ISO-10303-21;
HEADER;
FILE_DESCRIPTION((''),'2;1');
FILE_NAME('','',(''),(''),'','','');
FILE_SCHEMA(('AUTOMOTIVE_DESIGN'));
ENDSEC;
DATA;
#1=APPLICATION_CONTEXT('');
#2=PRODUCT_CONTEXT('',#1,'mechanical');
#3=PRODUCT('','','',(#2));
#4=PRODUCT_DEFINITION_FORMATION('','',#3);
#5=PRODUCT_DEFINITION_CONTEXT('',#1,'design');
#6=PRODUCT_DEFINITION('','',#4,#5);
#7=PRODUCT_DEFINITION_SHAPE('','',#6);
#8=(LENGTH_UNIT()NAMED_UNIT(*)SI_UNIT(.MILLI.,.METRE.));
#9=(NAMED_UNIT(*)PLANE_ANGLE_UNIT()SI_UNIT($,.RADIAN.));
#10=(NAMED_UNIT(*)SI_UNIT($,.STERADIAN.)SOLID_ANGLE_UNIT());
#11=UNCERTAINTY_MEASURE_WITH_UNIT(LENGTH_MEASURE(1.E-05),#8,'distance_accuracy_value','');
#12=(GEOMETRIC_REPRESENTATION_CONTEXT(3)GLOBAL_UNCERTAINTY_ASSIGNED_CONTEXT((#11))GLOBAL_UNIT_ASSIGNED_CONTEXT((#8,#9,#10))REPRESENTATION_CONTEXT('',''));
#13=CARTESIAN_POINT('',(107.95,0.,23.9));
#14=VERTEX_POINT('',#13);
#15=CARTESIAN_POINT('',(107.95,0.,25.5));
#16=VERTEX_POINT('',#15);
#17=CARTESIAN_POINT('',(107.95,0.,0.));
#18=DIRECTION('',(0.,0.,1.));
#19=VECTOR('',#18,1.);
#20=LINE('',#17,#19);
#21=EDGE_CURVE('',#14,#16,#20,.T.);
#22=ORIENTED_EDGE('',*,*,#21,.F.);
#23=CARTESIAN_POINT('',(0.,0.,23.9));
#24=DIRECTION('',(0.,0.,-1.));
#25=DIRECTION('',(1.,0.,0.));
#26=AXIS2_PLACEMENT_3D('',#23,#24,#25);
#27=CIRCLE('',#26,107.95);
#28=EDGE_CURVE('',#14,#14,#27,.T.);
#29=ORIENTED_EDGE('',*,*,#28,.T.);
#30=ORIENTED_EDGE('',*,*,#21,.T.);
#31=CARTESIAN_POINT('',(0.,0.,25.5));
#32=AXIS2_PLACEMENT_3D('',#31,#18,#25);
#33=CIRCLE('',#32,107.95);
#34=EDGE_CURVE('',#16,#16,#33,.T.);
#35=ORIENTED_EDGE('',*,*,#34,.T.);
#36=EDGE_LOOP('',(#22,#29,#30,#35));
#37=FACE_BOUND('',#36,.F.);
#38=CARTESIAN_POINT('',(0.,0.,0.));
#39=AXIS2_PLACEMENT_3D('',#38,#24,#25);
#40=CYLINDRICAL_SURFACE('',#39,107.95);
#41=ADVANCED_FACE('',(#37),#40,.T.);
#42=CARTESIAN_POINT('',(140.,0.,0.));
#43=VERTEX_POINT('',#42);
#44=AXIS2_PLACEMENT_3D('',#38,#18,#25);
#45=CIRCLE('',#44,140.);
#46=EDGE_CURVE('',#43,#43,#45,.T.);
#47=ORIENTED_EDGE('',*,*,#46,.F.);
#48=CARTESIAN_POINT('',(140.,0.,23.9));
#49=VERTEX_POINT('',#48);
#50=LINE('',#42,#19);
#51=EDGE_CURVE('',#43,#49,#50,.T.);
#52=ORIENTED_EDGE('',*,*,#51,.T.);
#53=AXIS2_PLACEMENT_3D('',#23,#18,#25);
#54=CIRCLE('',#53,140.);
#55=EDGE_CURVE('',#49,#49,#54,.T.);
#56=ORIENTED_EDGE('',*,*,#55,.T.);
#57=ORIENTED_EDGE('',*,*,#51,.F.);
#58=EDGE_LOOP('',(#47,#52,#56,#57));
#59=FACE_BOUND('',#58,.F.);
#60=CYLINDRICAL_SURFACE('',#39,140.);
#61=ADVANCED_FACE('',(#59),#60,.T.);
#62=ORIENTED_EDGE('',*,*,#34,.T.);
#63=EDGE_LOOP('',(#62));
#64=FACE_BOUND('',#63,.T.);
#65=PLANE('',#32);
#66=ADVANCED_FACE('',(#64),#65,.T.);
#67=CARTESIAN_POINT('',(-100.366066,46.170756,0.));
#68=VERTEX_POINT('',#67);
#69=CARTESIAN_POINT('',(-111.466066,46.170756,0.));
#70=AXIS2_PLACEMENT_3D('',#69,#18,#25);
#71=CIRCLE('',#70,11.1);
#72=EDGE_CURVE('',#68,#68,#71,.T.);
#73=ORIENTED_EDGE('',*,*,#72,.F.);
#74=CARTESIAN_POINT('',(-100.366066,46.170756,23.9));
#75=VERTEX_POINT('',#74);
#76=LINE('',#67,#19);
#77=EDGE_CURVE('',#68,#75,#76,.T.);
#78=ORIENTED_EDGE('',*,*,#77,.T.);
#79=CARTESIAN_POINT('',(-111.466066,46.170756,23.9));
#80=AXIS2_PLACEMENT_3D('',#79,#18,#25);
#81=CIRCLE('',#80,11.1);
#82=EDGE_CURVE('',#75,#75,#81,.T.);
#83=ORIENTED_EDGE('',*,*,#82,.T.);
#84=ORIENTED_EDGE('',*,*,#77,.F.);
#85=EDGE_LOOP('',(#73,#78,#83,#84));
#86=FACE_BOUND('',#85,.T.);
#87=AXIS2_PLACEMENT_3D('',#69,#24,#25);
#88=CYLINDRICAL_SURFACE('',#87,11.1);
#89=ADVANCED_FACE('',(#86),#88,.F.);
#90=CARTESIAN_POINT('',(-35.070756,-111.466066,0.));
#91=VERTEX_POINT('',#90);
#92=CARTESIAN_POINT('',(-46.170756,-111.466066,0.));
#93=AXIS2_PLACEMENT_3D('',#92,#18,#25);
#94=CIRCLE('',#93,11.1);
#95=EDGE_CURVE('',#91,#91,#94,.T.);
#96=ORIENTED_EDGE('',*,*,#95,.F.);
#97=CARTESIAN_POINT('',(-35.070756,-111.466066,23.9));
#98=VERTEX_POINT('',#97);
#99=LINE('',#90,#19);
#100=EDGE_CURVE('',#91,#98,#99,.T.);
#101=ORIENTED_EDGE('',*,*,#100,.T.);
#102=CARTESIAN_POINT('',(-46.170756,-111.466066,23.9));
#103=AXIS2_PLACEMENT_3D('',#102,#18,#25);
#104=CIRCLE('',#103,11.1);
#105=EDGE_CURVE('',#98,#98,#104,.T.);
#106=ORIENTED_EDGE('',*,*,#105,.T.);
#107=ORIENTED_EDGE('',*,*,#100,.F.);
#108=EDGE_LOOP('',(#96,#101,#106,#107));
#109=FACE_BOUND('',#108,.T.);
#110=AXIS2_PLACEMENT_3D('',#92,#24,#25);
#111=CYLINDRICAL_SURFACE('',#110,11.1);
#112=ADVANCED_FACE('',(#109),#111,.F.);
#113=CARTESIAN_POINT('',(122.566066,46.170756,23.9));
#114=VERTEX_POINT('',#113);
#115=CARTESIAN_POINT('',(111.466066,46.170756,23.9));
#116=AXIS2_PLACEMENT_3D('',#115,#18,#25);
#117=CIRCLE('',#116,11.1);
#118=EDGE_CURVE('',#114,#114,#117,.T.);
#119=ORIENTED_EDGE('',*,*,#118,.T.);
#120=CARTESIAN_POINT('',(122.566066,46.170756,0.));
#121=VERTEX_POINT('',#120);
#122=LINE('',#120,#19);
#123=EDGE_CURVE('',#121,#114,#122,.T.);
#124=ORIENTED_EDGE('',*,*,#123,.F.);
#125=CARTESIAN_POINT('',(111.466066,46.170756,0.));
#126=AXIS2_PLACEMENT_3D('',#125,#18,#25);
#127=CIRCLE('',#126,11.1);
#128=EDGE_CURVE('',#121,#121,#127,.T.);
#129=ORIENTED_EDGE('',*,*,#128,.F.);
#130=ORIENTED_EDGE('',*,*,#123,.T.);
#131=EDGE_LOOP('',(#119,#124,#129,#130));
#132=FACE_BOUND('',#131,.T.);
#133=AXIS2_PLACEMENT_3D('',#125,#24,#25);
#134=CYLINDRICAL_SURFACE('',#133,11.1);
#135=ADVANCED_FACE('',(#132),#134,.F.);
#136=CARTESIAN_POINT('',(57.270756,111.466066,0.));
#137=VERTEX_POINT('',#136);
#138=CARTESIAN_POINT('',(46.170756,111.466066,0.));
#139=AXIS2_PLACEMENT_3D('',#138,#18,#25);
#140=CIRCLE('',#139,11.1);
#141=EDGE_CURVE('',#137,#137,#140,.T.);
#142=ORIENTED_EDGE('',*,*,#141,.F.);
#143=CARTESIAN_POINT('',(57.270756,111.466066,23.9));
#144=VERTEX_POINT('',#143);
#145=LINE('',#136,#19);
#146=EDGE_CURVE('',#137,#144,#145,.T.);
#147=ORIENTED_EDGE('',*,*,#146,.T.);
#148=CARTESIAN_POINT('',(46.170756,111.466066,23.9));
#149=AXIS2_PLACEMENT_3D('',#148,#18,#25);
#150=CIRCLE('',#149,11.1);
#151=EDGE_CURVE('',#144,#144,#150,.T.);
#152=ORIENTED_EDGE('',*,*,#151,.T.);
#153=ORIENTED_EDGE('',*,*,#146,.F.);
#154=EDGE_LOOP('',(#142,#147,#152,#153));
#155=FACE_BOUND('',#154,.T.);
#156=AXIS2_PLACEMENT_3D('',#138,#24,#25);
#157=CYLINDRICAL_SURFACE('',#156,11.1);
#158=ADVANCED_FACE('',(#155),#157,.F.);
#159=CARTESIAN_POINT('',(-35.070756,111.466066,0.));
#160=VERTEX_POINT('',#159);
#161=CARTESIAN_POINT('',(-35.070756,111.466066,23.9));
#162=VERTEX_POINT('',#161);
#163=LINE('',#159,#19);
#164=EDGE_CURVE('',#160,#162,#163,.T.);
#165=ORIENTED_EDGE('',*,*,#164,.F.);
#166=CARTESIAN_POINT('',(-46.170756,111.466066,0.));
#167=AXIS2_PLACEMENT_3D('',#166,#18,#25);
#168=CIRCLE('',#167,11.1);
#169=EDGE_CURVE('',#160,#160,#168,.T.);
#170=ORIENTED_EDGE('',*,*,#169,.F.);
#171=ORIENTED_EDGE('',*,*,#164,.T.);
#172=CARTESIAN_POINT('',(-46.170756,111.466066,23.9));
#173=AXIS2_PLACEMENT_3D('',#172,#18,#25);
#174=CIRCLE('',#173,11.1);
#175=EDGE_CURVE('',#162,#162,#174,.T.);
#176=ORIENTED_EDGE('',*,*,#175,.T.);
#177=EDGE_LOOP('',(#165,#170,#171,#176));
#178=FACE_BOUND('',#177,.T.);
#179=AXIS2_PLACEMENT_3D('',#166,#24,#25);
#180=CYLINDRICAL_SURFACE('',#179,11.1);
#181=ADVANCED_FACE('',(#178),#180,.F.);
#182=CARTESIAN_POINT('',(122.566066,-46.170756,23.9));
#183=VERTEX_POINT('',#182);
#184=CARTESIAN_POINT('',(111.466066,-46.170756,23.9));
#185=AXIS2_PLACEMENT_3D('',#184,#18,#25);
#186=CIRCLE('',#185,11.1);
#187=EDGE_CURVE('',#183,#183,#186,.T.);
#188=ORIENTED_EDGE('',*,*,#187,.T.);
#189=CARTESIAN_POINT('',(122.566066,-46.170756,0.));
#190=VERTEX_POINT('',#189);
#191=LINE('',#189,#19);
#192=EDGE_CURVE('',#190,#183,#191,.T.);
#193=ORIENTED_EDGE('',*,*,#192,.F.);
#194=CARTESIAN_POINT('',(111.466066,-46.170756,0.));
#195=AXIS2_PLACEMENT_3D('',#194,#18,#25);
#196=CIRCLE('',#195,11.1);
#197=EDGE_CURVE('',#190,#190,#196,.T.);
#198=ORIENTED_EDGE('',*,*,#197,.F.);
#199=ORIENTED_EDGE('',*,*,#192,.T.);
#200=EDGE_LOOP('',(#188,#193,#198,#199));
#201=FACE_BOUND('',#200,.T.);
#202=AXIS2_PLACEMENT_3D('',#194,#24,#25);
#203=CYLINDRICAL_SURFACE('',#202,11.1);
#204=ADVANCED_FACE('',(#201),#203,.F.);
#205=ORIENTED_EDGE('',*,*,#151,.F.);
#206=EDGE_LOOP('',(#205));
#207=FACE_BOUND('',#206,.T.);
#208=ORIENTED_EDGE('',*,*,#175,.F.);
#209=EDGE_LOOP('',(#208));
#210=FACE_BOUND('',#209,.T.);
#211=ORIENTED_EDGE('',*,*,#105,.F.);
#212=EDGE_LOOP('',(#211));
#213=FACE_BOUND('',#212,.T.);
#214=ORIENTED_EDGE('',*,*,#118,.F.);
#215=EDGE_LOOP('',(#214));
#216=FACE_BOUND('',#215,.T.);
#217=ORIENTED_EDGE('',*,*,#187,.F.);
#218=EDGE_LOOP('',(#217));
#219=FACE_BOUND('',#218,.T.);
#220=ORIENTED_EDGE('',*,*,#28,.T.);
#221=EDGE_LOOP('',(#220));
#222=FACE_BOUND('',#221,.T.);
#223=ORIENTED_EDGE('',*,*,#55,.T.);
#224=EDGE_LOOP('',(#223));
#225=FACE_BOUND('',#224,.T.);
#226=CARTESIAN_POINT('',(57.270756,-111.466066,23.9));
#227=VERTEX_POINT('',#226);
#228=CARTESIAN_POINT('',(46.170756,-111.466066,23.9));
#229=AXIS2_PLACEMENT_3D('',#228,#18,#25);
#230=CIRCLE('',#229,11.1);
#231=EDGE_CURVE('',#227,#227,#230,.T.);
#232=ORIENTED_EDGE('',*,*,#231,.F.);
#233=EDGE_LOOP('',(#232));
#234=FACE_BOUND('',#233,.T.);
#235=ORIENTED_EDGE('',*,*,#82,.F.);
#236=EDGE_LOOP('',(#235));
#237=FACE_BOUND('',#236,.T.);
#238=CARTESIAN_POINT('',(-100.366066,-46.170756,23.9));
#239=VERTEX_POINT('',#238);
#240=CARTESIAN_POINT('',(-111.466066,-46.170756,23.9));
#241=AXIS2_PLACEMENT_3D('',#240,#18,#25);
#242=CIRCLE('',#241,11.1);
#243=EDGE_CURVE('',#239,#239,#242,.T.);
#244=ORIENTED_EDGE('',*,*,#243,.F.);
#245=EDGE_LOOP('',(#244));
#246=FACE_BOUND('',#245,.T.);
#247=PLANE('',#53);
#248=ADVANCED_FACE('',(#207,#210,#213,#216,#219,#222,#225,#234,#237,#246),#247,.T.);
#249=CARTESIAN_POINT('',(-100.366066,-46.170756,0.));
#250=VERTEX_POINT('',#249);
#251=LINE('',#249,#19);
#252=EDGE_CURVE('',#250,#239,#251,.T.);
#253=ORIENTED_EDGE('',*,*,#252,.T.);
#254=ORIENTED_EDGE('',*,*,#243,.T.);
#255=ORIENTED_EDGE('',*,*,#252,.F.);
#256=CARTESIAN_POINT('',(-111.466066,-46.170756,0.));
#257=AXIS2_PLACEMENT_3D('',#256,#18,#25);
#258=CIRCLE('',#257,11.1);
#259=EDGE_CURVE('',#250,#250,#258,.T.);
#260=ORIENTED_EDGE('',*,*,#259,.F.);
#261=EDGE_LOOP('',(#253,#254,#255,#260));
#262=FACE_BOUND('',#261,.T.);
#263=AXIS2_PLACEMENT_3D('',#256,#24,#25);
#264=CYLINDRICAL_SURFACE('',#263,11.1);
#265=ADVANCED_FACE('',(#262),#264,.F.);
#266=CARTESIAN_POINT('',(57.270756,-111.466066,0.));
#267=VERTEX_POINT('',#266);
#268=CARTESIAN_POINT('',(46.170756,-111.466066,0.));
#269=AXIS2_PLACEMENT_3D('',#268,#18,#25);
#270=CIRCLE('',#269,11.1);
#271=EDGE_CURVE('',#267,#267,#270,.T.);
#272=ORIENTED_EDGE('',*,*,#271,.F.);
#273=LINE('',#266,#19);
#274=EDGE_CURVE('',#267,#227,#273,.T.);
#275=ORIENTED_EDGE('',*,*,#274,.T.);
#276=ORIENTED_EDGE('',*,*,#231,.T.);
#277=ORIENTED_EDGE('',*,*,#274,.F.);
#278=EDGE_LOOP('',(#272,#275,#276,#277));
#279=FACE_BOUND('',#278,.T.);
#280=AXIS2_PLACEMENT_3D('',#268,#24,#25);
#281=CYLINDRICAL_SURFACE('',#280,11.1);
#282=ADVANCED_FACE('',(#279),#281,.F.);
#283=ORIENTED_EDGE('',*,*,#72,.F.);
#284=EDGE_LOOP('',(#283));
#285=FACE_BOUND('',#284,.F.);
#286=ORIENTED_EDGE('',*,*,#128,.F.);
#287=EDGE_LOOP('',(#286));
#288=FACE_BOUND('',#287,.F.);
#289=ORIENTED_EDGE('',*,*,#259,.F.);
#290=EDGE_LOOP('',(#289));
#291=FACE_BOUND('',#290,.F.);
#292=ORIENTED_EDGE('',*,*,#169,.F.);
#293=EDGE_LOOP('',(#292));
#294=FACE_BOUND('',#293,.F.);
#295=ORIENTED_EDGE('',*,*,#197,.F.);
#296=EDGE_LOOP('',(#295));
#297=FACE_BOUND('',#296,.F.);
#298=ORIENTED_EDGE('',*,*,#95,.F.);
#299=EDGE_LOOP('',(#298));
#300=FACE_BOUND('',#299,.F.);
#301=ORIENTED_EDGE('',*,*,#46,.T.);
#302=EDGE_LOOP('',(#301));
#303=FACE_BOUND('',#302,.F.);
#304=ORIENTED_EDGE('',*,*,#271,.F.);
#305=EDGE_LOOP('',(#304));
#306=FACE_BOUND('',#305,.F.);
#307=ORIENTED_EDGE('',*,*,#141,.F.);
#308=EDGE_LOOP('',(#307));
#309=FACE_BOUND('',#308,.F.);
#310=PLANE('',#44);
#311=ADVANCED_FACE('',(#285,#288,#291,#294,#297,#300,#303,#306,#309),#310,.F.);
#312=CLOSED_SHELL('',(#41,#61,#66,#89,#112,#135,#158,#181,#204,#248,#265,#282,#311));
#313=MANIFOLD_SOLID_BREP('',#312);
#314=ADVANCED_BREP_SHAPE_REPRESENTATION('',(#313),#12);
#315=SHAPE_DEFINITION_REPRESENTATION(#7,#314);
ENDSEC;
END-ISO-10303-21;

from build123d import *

# Parameters (mm, degrees)
F2_R     = 140
F2_R_2   = 11.1
F2_R_3   = 107.95
F4_DEPTH = 23.9
F5_DEPTH = 25.5


# Not quite as in the source:
# - a feature names something its author has since deleted; it is built from what else it names


with BuildPart() as f4:
    # F2 (on Top) → F4 (new body)
    with BuildSketch(Plane.XY):
        Circle(F2_R)
        with Locations((-46.1707561148, -111.4660655975)):
            Circle(F2_R_2, mode=Mode.SUBTRACT)
        with Locations((-111.4660655975, -46.1707561148)):
            Circle(F2_R_2, mode=Mode.SUBTRACT)
        with Locations((46.1707561148, -111.4660655975)):
            Circle(F2_R_2, mode=Mode.SUBTRACT)
        with Locations((111.4660655975, -46.1707561148)):
            Circle(F2_R_2, mode=Mode.SUBTRACT)
        with Locations((-111.4660655975, 46.1707561148)):
            Circle(F2_R_2, mode=Mode.SUBTRACT)
        with Locations((-46.1707561148, 111.4660655975)):
            Circle(F2_R_2, mode=Mode.SUBTRACT)
        Circle(F2_R_3, mode=Mode.SUBTRACT)
        with Locations((111.4660655975, 46.1707561148)):
            Circle(F2_R_2, mode=Mode.SUBTRACT)
        with Locations((46.1707561148, 111.4660655975)):
            Circle(F2_R_2, mode=Mode.SUBTRACT)
        Circle(F2_R_3)
    extrude(amount=F4_DEPTH)

    # F2 (on Top) → F5 (join)
    with BuildSketch(Plane.XY):
        Circle(F2_R_3)
    extrude(amount=F5_DEPTH)


solid = f4.part
